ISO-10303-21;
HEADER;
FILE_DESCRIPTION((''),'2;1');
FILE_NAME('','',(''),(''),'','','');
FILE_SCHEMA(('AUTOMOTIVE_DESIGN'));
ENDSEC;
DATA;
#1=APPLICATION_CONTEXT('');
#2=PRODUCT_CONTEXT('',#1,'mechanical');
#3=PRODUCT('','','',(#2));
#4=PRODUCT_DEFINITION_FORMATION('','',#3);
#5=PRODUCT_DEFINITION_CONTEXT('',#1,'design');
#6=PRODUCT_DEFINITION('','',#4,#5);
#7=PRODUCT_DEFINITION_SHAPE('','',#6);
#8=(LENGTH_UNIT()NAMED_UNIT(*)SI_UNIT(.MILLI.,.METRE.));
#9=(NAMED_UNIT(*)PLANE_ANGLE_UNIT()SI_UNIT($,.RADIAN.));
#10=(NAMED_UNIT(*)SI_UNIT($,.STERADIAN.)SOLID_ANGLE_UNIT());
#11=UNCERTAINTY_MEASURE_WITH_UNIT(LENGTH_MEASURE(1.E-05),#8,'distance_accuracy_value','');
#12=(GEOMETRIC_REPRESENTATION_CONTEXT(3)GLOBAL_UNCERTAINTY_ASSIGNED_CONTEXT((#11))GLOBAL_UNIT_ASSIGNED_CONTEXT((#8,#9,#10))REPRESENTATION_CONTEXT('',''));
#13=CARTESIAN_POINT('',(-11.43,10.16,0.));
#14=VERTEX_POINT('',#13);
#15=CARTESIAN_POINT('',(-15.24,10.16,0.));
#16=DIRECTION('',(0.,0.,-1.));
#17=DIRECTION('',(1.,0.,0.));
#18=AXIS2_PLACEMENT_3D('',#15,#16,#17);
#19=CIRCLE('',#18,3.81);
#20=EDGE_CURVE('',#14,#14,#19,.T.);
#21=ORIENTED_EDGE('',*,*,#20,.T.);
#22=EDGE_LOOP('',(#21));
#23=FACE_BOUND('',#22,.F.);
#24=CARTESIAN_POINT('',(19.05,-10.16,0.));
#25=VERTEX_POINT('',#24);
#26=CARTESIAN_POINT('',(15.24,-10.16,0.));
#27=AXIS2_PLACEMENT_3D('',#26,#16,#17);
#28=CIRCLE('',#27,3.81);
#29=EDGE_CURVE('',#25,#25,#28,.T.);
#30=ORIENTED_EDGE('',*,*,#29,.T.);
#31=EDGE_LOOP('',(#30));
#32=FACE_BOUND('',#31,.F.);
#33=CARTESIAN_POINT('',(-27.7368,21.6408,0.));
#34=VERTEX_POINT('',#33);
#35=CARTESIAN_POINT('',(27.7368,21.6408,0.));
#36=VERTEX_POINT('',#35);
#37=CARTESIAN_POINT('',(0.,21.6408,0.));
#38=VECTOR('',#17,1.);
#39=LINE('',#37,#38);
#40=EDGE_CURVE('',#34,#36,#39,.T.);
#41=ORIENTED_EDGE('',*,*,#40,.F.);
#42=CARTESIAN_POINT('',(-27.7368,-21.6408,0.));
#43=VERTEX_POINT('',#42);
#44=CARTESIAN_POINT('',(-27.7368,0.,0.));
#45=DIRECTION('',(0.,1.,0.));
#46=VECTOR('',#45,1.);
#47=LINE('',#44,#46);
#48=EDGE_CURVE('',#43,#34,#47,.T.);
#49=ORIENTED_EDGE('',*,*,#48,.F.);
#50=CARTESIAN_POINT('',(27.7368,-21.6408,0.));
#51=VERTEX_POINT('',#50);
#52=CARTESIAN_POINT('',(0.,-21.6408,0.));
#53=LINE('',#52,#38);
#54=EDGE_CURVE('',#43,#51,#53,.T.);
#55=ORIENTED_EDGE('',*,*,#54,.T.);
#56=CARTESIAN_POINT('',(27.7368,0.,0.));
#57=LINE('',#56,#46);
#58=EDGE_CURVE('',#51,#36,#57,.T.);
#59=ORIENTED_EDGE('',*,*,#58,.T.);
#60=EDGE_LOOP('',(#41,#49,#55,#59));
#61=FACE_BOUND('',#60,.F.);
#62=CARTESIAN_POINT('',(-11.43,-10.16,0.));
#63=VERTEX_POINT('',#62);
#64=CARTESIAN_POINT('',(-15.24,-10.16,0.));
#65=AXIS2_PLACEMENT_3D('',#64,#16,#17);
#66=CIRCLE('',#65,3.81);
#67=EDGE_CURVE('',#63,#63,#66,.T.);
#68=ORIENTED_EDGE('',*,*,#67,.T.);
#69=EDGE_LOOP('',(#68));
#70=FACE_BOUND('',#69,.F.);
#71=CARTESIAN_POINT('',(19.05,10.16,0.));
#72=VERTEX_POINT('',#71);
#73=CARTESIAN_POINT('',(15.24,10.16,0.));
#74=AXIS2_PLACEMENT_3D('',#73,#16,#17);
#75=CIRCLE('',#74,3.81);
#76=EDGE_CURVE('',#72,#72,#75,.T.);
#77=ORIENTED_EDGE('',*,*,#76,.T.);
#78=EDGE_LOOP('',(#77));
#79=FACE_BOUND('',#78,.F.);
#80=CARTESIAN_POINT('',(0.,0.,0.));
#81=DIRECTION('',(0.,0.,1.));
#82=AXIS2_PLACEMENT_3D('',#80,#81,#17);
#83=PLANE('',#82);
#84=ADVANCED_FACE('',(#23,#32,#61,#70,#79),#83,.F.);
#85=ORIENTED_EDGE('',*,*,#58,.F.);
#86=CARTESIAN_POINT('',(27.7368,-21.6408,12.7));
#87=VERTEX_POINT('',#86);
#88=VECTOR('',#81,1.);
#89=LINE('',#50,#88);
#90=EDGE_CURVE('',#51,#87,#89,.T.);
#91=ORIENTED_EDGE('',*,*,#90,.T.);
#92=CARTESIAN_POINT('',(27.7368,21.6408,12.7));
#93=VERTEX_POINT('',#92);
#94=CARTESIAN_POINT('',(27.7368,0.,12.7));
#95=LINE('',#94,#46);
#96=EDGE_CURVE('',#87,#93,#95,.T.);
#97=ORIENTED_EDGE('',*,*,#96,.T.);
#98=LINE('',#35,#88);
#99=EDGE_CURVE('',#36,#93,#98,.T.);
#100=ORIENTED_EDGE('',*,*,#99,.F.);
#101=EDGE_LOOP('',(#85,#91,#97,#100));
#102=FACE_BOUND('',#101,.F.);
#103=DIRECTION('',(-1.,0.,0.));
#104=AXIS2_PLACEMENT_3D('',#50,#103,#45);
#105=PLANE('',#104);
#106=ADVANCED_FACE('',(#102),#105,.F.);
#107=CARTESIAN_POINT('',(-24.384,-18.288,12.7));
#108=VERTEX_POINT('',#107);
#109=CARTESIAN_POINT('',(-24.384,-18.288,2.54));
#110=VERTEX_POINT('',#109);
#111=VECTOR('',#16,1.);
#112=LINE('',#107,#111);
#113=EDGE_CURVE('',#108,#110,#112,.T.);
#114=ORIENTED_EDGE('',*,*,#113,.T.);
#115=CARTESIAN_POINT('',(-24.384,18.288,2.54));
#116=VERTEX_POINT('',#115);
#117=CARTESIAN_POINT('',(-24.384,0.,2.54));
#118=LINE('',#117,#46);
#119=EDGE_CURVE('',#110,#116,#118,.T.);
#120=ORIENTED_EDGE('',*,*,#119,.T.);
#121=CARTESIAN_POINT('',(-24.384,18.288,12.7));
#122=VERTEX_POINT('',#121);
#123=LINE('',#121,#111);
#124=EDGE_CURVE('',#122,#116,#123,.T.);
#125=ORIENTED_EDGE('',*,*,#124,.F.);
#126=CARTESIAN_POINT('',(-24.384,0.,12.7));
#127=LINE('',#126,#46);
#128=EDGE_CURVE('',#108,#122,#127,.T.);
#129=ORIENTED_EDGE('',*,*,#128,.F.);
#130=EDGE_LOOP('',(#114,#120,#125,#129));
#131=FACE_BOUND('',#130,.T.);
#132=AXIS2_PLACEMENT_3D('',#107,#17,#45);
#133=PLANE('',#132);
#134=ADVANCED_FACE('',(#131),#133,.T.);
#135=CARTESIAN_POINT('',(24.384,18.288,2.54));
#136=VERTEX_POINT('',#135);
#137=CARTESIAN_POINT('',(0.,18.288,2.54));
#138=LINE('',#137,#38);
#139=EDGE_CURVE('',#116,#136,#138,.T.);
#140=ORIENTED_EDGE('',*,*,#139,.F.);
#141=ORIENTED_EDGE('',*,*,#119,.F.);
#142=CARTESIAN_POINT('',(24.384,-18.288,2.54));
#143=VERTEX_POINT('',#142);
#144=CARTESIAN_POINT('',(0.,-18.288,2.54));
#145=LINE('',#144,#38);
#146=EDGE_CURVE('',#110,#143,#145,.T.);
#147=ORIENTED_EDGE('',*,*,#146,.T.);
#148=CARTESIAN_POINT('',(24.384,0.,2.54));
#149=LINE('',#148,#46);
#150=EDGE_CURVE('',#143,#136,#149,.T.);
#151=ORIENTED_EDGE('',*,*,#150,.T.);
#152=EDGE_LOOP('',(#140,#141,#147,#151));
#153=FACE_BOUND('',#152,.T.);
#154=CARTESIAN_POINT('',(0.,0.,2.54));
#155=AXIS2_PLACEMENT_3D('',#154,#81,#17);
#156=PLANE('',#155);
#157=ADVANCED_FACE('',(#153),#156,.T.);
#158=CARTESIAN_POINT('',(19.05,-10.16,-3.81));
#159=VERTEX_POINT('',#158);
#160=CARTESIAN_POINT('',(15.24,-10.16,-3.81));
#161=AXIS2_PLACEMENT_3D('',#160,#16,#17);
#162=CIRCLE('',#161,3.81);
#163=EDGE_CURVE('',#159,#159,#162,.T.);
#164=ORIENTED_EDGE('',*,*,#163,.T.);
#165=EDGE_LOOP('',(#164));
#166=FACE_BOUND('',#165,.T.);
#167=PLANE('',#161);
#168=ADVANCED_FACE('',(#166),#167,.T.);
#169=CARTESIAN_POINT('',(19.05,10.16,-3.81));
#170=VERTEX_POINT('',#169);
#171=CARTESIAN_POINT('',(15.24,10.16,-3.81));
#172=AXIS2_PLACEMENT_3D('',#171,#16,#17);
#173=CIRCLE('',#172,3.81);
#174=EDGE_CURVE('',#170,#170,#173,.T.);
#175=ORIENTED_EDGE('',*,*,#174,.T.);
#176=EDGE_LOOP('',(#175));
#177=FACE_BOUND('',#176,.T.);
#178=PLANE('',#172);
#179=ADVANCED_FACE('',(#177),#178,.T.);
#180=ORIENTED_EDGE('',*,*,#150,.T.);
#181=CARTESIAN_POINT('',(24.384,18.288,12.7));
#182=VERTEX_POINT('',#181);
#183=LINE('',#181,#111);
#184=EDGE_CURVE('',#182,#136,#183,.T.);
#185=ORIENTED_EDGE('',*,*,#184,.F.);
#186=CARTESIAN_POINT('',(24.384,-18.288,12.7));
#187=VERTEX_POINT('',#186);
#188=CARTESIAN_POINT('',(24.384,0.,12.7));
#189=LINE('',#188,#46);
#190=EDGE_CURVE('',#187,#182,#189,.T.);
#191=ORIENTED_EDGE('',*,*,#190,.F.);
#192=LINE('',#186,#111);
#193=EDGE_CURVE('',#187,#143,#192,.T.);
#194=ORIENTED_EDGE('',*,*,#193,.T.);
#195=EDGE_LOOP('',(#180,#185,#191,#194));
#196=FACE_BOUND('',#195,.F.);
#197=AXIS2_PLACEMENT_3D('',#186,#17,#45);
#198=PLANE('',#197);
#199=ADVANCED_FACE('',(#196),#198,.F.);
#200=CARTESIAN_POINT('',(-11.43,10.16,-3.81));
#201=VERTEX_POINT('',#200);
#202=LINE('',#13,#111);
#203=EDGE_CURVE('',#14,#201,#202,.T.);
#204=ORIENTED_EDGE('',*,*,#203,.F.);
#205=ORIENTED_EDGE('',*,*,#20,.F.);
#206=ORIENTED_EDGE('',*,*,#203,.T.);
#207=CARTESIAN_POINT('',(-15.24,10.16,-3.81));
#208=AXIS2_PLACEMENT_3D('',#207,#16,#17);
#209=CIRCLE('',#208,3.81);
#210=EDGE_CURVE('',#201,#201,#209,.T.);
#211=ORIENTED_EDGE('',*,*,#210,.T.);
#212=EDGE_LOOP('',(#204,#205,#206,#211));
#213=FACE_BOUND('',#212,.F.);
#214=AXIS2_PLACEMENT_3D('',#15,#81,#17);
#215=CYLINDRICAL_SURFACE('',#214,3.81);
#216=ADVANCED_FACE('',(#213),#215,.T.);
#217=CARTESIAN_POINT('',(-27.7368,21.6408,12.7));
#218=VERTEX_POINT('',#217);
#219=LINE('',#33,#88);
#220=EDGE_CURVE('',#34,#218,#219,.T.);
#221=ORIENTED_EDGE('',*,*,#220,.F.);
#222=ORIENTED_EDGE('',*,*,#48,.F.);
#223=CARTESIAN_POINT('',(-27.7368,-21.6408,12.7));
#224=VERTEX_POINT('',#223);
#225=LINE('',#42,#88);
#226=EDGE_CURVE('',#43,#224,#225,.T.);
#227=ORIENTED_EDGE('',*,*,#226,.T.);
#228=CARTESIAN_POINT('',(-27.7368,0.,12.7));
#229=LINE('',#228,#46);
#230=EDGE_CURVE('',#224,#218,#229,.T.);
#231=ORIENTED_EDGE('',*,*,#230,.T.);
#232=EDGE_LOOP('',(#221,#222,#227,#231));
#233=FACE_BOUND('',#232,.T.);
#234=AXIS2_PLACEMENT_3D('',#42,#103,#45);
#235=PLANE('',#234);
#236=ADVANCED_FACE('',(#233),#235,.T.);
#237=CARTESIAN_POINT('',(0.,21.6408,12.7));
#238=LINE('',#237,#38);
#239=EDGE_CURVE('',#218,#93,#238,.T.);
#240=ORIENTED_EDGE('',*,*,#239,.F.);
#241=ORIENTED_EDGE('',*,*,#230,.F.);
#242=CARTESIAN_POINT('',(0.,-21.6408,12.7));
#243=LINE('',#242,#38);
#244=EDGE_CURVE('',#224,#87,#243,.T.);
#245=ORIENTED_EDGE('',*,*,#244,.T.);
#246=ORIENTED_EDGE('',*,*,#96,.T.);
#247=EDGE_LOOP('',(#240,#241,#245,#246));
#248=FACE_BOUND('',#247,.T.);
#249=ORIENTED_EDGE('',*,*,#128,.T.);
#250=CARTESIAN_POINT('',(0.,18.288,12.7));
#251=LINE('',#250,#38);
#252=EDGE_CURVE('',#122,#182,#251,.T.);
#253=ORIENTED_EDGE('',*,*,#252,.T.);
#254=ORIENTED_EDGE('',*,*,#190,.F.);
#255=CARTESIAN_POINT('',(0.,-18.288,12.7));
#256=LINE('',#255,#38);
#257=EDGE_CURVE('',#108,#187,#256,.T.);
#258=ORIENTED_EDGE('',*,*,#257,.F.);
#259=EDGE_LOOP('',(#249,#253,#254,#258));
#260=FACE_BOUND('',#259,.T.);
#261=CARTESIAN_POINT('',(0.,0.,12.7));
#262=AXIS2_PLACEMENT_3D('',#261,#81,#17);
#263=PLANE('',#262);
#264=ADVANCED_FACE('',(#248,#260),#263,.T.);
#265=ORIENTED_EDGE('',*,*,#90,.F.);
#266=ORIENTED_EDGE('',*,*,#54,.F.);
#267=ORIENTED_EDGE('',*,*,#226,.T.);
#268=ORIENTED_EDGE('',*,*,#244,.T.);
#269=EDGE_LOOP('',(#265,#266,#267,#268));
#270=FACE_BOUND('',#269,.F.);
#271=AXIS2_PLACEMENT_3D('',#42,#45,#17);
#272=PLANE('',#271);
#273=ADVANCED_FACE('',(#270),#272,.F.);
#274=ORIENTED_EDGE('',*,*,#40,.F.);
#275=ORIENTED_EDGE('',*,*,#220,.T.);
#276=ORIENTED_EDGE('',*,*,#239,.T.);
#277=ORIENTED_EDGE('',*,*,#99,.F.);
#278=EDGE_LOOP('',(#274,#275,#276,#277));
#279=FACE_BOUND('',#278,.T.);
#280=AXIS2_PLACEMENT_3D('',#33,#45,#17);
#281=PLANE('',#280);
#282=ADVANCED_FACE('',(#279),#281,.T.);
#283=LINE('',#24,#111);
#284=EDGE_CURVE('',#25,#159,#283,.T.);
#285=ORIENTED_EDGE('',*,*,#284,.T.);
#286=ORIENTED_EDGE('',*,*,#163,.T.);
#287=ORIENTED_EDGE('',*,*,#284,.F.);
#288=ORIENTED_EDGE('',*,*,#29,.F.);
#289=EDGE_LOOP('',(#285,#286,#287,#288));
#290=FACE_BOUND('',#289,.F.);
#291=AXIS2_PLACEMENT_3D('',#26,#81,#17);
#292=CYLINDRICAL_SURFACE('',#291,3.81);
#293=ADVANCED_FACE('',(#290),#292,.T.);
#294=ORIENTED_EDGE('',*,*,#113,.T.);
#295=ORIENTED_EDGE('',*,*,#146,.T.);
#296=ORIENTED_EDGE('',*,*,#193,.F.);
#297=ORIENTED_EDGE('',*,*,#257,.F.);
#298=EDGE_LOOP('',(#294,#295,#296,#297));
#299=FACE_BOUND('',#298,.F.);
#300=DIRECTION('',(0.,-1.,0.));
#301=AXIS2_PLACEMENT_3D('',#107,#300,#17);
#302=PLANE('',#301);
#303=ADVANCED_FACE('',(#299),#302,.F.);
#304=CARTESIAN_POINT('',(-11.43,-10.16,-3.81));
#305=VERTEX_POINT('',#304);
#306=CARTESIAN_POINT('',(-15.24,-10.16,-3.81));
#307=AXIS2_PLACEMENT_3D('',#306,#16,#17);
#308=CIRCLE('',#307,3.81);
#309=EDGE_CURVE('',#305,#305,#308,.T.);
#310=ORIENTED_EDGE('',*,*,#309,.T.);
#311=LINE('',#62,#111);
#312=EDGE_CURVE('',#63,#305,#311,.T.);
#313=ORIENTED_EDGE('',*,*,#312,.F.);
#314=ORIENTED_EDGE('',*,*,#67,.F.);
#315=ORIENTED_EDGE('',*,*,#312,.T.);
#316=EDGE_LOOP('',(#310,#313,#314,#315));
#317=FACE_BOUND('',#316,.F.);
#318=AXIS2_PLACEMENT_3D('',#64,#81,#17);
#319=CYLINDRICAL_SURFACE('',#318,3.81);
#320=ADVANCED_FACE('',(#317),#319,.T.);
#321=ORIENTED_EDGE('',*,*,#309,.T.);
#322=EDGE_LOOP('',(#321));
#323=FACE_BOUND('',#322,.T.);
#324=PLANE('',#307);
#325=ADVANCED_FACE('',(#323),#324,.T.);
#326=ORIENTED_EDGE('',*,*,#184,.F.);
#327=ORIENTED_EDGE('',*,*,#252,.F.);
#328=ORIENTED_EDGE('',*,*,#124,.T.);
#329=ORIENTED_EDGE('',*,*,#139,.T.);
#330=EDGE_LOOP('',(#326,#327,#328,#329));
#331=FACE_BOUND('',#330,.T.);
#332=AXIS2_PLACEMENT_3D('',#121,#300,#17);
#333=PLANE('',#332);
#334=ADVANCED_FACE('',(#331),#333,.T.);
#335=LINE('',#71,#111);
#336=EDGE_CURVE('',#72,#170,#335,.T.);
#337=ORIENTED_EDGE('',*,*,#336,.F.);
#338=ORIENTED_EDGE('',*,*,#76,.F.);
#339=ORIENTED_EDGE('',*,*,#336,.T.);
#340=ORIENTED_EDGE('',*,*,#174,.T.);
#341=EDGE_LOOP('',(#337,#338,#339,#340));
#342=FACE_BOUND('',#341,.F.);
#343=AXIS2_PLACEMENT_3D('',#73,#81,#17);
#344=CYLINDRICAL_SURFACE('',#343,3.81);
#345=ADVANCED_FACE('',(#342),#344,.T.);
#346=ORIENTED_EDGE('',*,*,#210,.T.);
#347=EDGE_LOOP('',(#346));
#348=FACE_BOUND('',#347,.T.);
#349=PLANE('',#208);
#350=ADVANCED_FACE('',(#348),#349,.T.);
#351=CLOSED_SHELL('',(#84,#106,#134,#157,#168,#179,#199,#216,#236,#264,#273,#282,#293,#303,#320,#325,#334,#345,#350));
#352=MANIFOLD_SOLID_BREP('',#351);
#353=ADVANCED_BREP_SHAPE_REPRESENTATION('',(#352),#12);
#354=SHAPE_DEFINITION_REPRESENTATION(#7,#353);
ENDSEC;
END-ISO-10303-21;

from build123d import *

# Parameters (mm, degrees)
F0_W     = 55.4736
F0_H     = 43.2816
F1_DEPTH = 12.7
F2_W     = 48.768
F2_H     = 36.576
F3_DEPTH = 10.16
F4_R     = 3.81
F5_DEPTH = 3.81


# Not quite as in the source:
# - a feature names something its author has since deleted; it is built from what else it names


with BuildPart() as f1:
    # F0 (on Top) → F1 (new body)
    with BuildSketch(Plane.XY):
        Rectangle(F0_W, F0_H)
    extrude(amount=F1_DEPTH)

    # F2 (on face) → F3 (cut)
    with BuildSketch(Plane.XY.offset(12.7)):
        Rectangle(F2_W, F2_H)
    extrude(amount=-F3_DEPTH, mode=Mode.SUBTRACT)

    # F4 (on face) → F5 (join)
    with BuildSketch(Plane(origin=(0, 0, 0), x_dir=(1, 0, 0), z_dir=(0, 0, -1))):
        with Locations((15.24, -10.16)):
            Circle(F4_R)
        with Locations((-15.24, -10.16)):
            Circle(F4_R)
        with Locations((15.24, 10.16)):
            Circle(F4_R)
        with Locations((-15.24, 10.16)):
            Circle(F4_R)
    extrude(amount=F5_DEPTH)


solid = f1.part
